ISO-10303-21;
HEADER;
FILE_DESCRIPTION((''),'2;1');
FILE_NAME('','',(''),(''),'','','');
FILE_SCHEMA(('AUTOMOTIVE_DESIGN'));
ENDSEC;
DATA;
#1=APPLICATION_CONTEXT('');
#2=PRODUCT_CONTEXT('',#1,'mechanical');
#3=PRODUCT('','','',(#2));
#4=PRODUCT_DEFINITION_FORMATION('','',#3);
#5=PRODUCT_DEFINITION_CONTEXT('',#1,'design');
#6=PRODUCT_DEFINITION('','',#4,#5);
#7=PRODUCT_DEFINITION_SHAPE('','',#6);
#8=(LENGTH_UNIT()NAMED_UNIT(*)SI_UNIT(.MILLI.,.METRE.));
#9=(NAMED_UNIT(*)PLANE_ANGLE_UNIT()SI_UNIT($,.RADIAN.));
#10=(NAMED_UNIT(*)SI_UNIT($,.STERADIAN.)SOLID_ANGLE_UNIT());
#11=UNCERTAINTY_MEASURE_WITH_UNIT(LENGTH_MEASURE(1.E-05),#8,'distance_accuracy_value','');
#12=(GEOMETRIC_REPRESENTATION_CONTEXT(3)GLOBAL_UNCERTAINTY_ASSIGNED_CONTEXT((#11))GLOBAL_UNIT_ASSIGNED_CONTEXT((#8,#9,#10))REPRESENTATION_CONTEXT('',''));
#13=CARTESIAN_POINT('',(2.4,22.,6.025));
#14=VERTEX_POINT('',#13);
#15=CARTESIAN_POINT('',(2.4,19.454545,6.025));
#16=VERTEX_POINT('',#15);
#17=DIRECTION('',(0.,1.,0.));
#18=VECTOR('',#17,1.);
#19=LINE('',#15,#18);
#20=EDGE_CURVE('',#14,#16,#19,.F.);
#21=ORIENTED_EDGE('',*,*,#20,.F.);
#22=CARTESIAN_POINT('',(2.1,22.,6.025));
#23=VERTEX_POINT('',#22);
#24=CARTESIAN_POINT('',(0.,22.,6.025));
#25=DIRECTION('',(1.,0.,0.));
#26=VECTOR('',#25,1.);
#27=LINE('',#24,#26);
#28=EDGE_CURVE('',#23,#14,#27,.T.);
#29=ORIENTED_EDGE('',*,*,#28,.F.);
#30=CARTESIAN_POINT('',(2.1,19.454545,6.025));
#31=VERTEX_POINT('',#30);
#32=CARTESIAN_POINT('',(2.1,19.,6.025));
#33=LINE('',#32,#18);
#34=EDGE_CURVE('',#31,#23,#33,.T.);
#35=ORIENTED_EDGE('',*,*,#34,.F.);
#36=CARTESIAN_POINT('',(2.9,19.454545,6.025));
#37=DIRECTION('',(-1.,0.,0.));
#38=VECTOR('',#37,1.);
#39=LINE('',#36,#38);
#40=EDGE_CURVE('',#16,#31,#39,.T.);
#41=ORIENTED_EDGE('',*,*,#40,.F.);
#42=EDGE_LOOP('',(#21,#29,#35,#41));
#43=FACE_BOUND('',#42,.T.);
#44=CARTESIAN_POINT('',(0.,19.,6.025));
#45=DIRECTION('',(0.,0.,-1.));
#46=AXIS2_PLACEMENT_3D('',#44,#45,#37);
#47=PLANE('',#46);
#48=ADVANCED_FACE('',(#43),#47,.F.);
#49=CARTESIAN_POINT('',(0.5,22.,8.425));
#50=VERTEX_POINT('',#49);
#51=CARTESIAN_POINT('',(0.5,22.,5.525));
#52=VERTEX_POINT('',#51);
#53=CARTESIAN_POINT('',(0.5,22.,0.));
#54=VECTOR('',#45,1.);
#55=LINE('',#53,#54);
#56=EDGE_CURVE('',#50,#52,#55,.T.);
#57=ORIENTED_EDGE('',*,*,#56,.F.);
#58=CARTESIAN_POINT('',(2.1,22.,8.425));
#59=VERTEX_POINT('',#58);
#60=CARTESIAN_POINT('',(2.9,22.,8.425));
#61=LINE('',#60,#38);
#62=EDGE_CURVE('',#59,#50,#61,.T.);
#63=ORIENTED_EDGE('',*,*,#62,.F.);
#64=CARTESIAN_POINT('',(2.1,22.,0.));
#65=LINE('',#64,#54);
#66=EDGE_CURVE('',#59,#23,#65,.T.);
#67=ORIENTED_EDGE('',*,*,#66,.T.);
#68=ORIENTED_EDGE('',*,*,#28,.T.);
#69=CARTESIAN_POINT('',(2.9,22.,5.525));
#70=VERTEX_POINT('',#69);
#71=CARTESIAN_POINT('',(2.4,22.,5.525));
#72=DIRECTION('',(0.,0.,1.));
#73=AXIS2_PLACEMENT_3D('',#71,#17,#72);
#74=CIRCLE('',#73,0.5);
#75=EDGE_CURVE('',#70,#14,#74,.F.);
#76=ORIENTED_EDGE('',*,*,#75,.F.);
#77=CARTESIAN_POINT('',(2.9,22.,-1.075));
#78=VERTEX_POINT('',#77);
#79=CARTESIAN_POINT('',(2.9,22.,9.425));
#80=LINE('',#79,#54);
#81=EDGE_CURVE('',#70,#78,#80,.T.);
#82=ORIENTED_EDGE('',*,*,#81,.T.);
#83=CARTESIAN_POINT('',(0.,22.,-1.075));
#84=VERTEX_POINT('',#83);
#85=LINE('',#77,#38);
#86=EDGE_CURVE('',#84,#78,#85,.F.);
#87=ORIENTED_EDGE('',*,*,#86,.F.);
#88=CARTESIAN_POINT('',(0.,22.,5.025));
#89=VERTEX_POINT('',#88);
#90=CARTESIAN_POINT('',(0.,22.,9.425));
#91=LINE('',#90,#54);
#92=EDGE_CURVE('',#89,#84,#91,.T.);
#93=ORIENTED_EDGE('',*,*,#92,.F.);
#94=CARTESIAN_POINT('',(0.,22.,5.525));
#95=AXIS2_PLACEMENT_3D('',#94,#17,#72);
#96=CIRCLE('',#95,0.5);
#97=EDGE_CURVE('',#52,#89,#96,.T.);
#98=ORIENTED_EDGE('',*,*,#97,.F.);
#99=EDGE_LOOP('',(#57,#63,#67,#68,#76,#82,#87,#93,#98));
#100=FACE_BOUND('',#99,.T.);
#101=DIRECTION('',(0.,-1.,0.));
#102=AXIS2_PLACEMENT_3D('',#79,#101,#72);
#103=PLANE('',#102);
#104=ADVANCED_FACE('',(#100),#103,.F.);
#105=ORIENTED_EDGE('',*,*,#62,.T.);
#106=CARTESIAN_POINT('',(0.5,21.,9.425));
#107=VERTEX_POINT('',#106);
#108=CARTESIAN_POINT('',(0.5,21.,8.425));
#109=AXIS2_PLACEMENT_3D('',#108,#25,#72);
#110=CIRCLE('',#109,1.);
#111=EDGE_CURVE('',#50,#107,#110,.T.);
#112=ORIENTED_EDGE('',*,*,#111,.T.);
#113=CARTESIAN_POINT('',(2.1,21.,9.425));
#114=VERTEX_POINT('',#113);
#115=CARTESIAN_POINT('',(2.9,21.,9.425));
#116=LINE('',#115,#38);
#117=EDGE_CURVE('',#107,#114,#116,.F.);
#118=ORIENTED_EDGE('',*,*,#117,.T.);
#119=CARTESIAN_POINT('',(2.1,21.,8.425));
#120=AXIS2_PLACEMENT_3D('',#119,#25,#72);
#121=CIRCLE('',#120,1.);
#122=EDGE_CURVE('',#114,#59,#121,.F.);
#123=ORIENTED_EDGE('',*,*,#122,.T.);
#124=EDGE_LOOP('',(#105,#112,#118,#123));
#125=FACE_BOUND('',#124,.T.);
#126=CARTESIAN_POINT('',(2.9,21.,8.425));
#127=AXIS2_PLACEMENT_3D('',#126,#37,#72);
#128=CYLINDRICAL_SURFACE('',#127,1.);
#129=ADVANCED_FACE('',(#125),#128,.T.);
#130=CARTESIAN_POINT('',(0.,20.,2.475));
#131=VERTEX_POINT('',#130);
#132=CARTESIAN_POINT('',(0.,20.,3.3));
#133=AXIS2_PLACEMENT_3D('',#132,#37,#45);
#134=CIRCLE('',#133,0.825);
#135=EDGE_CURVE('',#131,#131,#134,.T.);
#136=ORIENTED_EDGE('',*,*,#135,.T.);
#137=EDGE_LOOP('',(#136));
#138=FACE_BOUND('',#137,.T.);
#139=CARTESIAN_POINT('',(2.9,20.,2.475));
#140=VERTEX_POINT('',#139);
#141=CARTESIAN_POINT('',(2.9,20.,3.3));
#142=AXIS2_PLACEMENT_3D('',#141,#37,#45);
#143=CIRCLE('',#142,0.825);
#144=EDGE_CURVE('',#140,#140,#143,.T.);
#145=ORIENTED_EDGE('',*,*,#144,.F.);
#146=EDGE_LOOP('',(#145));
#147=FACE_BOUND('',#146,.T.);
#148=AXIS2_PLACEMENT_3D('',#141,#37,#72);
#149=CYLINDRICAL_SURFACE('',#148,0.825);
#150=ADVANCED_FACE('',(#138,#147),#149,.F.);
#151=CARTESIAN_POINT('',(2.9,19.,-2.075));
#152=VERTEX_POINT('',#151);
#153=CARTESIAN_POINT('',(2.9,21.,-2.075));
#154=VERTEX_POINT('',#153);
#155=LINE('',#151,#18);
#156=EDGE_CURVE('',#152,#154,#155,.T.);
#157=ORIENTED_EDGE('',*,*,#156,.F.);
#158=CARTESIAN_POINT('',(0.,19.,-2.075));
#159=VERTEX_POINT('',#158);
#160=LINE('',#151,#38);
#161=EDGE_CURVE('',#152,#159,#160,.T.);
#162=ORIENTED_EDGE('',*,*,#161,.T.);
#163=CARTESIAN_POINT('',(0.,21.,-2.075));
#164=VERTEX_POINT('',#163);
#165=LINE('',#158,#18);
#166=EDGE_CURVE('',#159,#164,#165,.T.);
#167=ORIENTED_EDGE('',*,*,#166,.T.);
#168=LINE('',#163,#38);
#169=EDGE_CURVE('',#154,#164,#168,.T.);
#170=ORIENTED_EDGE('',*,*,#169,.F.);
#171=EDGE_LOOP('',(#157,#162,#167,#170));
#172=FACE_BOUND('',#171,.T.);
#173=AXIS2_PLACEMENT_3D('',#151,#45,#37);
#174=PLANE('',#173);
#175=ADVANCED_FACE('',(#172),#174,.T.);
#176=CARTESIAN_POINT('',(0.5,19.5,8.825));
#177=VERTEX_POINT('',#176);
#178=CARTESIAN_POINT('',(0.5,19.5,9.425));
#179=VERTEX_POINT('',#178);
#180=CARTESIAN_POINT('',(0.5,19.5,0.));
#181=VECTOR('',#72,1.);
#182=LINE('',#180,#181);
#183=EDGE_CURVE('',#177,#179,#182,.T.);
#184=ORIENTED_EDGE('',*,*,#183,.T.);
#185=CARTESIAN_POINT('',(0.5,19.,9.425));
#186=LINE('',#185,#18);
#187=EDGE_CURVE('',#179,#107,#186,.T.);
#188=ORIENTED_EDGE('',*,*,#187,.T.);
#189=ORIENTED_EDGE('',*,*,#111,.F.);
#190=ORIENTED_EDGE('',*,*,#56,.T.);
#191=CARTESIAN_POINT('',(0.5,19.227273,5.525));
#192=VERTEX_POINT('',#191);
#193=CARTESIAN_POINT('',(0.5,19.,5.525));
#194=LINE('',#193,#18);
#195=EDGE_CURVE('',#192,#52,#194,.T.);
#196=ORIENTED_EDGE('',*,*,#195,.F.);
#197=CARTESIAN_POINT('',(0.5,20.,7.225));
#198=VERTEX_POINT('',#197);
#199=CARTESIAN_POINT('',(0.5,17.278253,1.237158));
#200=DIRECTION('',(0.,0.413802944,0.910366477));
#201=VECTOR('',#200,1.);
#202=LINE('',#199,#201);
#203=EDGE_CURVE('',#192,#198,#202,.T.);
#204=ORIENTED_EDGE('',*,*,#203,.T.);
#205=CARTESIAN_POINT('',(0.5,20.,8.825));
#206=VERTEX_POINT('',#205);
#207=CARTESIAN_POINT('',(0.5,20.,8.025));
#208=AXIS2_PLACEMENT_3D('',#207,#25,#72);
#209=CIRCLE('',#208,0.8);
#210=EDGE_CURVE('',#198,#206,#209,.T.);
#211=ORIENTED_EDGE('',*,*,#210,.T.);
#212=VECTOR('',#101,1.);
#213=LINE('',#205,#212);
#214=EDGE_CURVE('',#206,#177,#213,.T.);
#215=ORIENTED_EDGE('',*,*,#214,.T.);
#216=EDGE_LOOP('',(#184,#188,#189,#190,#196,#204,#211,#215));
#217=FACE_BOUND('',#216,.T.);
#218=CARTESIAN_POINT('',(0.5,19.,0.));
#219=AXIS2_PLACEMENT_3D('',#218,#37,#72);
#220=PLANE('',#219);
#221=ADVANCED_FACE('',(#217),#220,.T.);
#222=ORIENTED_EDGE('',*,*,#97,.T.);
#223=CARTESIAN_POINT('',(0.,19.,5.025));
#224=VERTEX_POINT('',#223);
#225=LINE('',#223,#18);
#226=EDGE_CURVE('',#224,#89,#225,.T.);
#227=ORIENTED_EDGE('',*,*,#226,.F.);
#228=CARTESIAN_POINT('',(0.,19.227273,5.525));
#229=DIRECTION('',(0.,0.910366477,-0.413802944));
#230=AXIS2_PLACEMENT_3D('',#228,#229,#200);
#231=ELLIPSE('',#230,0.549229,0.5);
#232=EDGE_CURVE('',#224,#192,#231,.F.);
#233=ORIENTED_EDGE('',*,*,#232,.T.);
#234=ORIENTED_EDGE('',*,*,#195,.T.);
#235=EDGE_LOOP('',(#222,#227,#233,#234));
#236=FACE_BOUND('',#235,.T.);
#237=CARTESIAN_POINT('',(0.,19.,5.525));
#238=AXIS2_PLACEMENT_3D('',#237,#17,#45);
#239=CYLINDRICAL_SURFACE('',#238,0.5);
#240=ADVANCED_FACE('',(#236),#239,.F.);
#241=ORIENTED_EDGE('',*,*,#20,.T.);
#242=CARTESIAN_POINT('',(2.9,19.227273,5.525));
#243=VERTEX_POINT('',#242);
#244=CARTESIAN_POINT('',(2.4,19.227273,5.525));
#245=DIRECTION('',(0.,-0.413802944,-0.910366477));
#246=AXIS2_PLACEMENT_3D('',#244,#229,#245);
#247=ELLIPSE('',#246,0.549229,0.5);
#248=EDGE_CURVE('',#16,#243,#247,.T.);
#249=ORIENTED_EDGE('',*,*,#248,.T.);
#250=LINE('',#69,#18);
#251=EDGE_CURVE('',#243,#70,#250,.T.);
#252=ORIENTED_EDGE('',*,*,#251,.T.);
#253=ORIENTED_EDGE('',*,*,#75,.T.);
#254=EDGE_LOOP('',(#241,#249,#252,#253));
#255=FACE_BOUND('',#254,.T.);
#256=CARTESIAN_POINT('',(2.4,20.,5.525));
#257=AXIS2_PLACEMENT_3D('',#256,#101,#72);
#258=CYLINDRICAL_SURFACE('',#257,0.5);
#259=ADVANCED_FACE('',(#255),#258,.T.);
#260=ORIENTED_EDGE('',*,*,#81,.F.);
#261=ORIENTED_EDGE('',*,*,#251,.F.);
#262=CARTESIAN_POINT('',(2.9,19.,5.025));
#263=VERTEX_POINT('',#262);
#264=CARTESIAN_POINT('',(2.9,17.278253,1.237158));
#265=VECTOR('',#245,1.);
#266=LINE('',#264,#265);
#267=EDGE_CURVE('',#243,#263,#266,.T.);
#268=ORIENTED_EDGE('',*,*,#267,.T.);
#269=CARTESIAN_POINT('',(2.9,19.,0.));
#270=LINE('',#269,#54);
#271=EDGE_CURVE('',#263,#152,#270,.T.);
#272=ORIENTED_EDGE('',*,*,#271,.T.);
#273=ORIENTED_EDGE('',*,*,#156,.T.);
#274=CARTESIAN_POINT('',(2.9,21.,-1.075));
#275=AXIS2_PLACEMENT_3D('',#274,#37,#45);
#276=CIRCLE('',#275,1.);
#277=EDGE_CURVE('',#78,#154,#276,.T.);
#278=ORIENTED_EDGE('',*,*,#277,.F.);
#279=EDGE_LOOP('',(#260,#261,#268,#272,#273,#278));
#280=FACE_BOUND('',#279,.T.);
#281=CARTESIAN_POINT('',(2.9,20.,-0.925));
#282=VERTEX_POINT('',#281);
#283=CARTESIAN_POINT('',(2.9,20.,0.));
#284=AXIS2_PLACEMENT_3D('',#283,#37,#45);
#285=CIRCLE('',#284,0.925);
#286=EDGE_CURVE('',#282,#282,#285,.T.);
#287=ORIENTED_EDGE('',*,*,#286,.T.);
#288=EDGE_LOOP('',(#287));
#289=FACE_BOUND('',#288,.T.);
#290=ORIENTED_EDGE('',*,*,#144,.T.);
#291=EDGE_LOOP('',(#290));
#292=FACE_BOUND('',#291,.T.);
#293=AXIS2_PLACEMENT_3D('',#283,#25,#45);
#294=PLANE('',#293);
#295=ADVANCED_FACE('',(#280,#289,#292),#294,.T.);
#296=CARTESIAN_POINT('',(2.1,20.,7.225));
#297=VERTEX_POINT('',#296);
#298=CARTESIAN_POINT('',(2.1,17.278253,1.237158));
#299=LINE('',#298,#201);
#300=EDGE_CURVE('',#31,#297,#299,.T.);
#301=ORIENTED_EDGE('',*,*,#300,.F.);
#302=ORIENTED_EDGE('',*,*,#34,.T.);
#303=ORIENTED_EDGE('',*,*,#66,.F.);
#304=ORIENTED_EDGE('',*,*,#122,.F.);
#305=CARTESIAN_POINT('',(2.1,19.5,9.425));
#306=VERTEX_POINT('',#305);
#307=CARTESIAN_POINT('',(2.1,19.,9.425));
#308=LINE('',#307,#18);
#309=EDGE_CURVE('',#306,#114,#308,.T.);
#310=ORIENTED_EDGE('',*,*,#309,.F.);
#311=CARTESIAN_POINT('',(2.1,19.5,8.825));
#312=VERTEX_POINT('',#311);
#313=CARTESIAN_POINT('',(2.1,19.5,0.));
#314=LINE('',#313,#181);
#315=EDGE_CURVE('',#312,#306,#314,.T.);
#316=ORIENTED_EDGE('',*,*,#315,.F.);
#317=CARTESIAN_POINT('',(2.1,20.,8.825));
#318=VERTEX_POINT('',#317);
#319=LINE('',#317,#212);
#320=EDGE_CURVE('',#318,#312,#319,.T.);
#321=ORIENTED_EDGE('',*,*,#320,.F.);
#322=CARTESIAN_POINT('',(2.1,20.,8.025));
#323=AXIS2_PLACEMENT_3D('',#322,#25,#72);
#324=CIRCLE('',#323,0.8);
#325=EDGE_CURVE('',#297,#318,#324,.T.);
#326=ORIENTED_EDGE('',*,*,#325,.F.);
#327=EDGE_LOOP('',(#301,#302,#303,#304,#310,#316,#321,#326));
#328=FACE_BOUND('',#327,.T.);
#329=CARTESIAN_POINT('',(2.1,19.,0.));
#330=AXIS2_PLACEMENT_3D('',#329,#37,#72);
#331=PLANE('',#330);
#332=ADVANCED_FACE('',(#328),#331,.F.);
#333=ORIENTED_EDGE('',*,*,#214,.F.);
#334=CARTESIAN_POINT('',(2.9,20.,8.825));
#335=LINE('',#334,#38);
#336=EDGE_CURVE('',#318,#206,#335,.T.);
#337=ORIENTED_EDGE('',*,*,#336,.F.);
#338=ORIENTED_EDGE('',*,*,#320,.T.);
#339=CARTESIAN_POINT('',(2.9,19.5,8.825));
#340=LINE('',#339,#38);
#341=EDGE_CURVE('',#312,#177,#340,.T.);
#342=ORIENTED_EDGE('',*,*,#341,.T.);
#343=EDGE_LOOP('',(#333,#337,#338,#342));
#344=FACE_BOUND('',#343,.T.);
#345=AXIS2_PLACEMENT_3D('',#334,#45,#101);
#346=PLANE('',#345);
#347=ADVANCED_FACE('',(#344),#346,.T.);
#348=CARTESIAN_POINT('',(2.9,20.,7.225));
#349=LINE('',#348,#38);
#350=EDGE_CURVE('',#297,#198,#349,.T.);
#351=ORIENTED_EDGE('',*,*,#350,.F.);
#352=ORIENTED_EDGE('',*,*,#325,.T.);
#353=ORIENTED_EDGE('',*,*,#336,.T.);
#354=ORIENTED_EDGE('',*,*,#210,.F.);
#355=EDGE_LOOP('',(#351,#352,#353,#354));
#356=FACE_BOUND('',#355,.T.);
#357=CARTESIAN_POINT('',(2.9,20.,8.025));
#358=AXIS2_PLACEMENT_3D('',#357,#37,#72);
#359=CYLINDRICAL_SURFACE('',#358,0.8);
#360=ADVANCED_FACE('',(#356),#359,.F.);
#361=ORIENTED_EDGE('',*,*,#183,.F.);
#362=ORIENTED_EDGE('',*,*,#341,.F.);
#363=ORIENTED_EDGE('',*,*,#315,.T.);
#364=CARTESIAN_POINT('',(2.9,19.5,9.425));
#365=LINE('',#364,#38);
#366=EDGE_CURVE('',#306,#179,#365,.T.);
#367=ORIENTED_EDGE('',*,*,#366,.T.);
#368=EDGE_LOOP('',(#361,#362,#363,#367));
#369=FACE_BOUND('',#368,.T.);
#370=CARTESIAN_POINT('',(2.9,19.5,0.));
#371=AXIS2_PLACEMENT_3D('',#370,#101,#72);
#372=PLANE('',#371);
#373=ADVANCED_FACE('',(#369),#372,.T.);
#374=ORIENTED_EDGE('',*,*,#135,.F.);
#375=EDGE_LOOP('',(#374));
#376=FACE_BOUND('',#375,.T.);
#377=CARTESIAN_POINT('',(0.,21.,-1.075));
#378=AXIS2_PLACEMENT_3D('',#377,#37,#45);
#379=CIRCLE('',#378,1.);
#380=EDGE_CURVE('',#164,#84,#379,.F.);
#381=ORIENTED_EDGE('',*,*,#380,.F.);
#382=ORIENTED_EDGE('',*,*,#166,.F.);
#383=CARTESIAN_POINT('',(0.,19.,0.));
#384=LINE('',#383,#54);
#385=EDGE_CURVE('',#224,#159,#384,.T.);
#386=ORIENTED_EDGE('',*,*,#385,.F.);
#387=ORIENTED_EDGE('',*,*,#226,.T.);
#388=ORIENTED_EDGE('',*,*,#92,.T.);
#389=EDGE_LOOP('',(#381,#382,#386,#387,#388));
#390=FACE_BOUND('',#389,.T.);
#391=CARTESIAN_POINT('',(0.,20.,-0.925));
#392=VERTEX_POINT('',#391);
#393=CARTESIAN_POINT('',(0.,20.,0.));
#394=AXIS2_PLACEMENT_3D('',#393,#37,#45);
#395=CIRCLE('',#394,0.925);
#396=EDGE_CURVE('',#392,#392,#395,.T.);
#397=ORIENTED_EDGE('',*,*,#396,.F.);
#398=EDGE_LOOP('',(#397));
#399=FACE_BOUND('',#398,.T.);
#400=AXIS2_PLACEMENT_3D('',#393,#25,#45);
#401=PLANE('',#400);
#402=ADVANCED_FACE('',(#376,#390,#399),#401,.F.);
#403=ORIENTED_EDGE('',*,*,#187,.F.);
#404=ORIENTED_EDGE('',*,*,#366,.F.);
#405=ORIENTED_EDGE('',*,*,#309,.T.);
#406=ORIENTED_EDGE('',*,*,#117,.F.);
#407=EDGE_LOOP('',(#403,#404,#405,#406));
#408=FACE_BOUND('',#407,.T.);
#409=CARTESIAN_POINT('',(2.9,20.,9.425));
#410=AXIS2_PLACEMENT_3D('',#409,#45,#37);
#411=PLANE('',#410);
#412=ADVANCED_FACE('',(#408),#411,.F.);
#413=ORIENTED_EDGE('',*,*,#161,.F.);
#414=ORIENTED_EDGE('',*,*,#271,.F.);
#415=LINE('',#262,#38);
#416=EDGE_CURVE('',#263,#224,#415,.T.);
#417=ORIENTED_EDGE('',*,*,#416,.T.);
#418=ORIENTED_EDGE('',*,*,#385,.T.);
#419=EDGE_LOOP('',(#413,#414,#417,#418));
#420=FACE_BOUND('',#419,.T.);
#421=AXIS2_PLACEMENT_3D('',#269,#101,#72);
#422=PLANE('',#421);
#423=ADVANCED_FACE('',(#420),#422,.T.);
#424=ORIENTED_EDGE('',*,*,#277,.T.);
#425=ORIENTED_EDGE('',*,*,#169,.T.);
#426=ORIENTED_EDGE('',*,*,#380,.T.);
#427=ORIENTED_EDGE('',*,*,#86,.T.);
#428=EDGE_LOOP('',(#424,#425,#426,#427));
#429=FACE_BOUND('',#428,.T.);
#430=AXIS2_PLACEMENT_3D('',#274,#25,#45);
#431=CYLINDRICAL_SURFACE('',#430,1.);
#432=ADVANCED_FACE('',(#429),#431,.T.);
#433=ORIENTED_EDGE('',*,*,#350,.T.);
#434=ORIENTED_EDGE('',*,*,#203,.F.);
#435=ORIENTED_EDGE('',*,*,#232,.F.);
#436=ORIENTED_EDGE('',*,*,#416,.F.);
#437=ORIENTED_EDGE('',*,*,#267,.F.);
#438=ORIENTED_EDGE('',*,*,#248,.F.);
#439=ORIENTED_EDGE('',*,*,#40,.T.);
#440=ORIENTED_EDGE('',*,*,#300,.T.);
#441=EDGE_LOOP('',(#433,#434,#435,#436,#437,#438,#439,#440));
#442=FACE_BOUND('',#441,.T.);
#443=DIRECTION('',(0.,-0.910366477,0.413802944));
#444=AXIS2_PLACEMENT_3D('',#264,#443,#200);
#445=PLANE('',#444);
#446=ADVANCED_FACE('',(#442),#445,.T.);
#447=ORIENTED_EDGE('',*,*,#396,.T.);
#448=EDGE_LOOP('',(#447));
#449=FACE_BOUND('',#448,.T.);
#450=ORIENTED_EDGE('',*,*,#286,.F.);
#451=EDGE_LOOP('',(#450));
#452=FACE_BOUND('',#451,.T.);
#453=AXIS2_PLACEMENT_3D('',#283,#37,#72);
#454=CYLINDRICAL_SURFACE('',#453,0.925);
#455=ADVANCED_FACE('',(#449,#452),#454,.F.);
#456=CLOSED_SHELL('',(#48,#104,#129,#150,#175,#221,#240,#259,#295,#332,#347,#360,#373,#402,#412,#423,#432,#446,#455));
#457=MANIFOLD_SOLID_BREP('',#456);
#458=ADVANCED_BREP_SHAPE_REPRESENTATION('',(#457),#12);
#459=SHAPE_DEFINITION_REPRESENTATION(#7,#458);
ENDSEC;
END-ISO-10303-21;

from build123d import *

# Parameters (mm, degrees)
SKETCH_1_W          = 11.5
SKETCH_1_H          = 3
SKETCH_1_R          = 0.925
SKETCH_1_R_2        = 0.825
SKETCH_1_R_3        = 0.8
EXTRUDE_1_DEPTH     = 2.9
CUT_EXTRUDE_1_DEPTH = 11.06184004
SKETCH_2_W          = 0.5
SKETCH_2_H          = 4.4
SKETCH_2_W_2        = 0.8
SKETCH_2_H_2        = 3.4
CUT_EXTRUDE_2_DEPTH = 11.3073093
FILLET_2_R          = 1
FILLET_3_R          = 0.5
SKETCH_3_W          = 47.443490455
SKETCH_3_H          = 29.152776371
CUT_EXTRUDE_3_DEPTH = 16.531922772


with BuildPart() as part:
    # 草图1 → 凸台-拉伸1 (new body)
    with BuildSketch(Plane(origin=(0, 0, 0), x_dir=(0, 0, -1), z_dir=(1, 0, 0))):
        with Locations((-3.675, -0.5)):
            Rectangle(SKETCH_1_W, SKETCH_1_H)
        Circle(SKETCH_1_R, mode=Mode.SUBTRACT)
        with Locations((-3.3, 0)):
            Circle(SKETCH_1_R_2, mode=Mode.SUBTRACT)
        with Locations((-8.025, 0)):
            Circle(SKETCH_1_R_3, mode=Mode.SUBTRACT)
    extrude(amount=EXTRUDE_1_DEPTH)

    # 草图1<11> → 切除-拉伸1 (cut, through all)
    with BuildSketch(Plane(origin=(0, 0, 0), x_dir=(0, 0, -1), z_dir=(1, 0, 0))):
        with BuildLine():
            Line((-8.825, 0.5), (-8.825, 0))
            ThreePointArc((-8.825, 0), (-8.025, 0.8), (-7.225, 0))
            Line((-7.225, 0), (-5.025, 1))
            Line((-5.025, 1), (-9.425, 1))
            Line((-9.425, 1), (-9.425, 0.5))
            Line((-9.425, 0.5), (-8.825, 0.5))
        make_face()
    extrude(amount=CUT_EXTRUDE_1_DEPTH, mode=Mode.SUBTRACT)

    # 草图2 → 切除-拉伸2 (cut, through all)
    with BuildSketch(Plane.XZ.offset(2)):
        with Locations((0.25, 7.225)):
            Rectangle(SKETCH_2_W, SKETCH_2_H)
        with Locations((2.5, 7.725)):
            Rectangle(SKETCH_2_W_2, SKETCH_2_H_2)
    extrude(amount=-CUT_EXTRUDE_2_DEPTH, mode=Mode.SUBTRACT)

    # 圆角2
    fillet_2_edges = [part.edges().sort_by_distance(p)[0] for p in [
        (1.45, -2, -2.075),
        (1.3, -2, 9.425),
    ]]
    fillet(fillet_2_edges, radius=FILLET_2_R)

    # 圆角3
    fillet_3_edges = [part.edges().sort_by_distance(p)[0] for p in [
        (2.9, -0.727272727, 6.025),
        (0.5, -0.5, 5.025),
    ]]
    fillet(fillet_3_edges, radius=FILLET_3_R - 0.0001)  # a hair under: the kernel refuses the full size


with BuildPart() as body_2:
    # 镜向1: mirrored copy
    add(part.part.mirror(Plane.ZX.offset(10)))


with BuildPart() as part_1:
    add(part.part)

    # 草图3 → 切除-拉伸3 (cut, through all)
    with BuildSketch(Plane(origin=(0, 10, 0), x_dir=(1, 0, 0), z_dir=(0, 1, 0))):
        with Locations((5.281098752, -2.215269705)):
            Rectangle(SKETCH_3_W, SKETCH_3_H)
    extrude(amount=-CUT_EXTRUDE_3_DEPTH, mode=Mode.SUBTRACT)


solid = body_2.part
